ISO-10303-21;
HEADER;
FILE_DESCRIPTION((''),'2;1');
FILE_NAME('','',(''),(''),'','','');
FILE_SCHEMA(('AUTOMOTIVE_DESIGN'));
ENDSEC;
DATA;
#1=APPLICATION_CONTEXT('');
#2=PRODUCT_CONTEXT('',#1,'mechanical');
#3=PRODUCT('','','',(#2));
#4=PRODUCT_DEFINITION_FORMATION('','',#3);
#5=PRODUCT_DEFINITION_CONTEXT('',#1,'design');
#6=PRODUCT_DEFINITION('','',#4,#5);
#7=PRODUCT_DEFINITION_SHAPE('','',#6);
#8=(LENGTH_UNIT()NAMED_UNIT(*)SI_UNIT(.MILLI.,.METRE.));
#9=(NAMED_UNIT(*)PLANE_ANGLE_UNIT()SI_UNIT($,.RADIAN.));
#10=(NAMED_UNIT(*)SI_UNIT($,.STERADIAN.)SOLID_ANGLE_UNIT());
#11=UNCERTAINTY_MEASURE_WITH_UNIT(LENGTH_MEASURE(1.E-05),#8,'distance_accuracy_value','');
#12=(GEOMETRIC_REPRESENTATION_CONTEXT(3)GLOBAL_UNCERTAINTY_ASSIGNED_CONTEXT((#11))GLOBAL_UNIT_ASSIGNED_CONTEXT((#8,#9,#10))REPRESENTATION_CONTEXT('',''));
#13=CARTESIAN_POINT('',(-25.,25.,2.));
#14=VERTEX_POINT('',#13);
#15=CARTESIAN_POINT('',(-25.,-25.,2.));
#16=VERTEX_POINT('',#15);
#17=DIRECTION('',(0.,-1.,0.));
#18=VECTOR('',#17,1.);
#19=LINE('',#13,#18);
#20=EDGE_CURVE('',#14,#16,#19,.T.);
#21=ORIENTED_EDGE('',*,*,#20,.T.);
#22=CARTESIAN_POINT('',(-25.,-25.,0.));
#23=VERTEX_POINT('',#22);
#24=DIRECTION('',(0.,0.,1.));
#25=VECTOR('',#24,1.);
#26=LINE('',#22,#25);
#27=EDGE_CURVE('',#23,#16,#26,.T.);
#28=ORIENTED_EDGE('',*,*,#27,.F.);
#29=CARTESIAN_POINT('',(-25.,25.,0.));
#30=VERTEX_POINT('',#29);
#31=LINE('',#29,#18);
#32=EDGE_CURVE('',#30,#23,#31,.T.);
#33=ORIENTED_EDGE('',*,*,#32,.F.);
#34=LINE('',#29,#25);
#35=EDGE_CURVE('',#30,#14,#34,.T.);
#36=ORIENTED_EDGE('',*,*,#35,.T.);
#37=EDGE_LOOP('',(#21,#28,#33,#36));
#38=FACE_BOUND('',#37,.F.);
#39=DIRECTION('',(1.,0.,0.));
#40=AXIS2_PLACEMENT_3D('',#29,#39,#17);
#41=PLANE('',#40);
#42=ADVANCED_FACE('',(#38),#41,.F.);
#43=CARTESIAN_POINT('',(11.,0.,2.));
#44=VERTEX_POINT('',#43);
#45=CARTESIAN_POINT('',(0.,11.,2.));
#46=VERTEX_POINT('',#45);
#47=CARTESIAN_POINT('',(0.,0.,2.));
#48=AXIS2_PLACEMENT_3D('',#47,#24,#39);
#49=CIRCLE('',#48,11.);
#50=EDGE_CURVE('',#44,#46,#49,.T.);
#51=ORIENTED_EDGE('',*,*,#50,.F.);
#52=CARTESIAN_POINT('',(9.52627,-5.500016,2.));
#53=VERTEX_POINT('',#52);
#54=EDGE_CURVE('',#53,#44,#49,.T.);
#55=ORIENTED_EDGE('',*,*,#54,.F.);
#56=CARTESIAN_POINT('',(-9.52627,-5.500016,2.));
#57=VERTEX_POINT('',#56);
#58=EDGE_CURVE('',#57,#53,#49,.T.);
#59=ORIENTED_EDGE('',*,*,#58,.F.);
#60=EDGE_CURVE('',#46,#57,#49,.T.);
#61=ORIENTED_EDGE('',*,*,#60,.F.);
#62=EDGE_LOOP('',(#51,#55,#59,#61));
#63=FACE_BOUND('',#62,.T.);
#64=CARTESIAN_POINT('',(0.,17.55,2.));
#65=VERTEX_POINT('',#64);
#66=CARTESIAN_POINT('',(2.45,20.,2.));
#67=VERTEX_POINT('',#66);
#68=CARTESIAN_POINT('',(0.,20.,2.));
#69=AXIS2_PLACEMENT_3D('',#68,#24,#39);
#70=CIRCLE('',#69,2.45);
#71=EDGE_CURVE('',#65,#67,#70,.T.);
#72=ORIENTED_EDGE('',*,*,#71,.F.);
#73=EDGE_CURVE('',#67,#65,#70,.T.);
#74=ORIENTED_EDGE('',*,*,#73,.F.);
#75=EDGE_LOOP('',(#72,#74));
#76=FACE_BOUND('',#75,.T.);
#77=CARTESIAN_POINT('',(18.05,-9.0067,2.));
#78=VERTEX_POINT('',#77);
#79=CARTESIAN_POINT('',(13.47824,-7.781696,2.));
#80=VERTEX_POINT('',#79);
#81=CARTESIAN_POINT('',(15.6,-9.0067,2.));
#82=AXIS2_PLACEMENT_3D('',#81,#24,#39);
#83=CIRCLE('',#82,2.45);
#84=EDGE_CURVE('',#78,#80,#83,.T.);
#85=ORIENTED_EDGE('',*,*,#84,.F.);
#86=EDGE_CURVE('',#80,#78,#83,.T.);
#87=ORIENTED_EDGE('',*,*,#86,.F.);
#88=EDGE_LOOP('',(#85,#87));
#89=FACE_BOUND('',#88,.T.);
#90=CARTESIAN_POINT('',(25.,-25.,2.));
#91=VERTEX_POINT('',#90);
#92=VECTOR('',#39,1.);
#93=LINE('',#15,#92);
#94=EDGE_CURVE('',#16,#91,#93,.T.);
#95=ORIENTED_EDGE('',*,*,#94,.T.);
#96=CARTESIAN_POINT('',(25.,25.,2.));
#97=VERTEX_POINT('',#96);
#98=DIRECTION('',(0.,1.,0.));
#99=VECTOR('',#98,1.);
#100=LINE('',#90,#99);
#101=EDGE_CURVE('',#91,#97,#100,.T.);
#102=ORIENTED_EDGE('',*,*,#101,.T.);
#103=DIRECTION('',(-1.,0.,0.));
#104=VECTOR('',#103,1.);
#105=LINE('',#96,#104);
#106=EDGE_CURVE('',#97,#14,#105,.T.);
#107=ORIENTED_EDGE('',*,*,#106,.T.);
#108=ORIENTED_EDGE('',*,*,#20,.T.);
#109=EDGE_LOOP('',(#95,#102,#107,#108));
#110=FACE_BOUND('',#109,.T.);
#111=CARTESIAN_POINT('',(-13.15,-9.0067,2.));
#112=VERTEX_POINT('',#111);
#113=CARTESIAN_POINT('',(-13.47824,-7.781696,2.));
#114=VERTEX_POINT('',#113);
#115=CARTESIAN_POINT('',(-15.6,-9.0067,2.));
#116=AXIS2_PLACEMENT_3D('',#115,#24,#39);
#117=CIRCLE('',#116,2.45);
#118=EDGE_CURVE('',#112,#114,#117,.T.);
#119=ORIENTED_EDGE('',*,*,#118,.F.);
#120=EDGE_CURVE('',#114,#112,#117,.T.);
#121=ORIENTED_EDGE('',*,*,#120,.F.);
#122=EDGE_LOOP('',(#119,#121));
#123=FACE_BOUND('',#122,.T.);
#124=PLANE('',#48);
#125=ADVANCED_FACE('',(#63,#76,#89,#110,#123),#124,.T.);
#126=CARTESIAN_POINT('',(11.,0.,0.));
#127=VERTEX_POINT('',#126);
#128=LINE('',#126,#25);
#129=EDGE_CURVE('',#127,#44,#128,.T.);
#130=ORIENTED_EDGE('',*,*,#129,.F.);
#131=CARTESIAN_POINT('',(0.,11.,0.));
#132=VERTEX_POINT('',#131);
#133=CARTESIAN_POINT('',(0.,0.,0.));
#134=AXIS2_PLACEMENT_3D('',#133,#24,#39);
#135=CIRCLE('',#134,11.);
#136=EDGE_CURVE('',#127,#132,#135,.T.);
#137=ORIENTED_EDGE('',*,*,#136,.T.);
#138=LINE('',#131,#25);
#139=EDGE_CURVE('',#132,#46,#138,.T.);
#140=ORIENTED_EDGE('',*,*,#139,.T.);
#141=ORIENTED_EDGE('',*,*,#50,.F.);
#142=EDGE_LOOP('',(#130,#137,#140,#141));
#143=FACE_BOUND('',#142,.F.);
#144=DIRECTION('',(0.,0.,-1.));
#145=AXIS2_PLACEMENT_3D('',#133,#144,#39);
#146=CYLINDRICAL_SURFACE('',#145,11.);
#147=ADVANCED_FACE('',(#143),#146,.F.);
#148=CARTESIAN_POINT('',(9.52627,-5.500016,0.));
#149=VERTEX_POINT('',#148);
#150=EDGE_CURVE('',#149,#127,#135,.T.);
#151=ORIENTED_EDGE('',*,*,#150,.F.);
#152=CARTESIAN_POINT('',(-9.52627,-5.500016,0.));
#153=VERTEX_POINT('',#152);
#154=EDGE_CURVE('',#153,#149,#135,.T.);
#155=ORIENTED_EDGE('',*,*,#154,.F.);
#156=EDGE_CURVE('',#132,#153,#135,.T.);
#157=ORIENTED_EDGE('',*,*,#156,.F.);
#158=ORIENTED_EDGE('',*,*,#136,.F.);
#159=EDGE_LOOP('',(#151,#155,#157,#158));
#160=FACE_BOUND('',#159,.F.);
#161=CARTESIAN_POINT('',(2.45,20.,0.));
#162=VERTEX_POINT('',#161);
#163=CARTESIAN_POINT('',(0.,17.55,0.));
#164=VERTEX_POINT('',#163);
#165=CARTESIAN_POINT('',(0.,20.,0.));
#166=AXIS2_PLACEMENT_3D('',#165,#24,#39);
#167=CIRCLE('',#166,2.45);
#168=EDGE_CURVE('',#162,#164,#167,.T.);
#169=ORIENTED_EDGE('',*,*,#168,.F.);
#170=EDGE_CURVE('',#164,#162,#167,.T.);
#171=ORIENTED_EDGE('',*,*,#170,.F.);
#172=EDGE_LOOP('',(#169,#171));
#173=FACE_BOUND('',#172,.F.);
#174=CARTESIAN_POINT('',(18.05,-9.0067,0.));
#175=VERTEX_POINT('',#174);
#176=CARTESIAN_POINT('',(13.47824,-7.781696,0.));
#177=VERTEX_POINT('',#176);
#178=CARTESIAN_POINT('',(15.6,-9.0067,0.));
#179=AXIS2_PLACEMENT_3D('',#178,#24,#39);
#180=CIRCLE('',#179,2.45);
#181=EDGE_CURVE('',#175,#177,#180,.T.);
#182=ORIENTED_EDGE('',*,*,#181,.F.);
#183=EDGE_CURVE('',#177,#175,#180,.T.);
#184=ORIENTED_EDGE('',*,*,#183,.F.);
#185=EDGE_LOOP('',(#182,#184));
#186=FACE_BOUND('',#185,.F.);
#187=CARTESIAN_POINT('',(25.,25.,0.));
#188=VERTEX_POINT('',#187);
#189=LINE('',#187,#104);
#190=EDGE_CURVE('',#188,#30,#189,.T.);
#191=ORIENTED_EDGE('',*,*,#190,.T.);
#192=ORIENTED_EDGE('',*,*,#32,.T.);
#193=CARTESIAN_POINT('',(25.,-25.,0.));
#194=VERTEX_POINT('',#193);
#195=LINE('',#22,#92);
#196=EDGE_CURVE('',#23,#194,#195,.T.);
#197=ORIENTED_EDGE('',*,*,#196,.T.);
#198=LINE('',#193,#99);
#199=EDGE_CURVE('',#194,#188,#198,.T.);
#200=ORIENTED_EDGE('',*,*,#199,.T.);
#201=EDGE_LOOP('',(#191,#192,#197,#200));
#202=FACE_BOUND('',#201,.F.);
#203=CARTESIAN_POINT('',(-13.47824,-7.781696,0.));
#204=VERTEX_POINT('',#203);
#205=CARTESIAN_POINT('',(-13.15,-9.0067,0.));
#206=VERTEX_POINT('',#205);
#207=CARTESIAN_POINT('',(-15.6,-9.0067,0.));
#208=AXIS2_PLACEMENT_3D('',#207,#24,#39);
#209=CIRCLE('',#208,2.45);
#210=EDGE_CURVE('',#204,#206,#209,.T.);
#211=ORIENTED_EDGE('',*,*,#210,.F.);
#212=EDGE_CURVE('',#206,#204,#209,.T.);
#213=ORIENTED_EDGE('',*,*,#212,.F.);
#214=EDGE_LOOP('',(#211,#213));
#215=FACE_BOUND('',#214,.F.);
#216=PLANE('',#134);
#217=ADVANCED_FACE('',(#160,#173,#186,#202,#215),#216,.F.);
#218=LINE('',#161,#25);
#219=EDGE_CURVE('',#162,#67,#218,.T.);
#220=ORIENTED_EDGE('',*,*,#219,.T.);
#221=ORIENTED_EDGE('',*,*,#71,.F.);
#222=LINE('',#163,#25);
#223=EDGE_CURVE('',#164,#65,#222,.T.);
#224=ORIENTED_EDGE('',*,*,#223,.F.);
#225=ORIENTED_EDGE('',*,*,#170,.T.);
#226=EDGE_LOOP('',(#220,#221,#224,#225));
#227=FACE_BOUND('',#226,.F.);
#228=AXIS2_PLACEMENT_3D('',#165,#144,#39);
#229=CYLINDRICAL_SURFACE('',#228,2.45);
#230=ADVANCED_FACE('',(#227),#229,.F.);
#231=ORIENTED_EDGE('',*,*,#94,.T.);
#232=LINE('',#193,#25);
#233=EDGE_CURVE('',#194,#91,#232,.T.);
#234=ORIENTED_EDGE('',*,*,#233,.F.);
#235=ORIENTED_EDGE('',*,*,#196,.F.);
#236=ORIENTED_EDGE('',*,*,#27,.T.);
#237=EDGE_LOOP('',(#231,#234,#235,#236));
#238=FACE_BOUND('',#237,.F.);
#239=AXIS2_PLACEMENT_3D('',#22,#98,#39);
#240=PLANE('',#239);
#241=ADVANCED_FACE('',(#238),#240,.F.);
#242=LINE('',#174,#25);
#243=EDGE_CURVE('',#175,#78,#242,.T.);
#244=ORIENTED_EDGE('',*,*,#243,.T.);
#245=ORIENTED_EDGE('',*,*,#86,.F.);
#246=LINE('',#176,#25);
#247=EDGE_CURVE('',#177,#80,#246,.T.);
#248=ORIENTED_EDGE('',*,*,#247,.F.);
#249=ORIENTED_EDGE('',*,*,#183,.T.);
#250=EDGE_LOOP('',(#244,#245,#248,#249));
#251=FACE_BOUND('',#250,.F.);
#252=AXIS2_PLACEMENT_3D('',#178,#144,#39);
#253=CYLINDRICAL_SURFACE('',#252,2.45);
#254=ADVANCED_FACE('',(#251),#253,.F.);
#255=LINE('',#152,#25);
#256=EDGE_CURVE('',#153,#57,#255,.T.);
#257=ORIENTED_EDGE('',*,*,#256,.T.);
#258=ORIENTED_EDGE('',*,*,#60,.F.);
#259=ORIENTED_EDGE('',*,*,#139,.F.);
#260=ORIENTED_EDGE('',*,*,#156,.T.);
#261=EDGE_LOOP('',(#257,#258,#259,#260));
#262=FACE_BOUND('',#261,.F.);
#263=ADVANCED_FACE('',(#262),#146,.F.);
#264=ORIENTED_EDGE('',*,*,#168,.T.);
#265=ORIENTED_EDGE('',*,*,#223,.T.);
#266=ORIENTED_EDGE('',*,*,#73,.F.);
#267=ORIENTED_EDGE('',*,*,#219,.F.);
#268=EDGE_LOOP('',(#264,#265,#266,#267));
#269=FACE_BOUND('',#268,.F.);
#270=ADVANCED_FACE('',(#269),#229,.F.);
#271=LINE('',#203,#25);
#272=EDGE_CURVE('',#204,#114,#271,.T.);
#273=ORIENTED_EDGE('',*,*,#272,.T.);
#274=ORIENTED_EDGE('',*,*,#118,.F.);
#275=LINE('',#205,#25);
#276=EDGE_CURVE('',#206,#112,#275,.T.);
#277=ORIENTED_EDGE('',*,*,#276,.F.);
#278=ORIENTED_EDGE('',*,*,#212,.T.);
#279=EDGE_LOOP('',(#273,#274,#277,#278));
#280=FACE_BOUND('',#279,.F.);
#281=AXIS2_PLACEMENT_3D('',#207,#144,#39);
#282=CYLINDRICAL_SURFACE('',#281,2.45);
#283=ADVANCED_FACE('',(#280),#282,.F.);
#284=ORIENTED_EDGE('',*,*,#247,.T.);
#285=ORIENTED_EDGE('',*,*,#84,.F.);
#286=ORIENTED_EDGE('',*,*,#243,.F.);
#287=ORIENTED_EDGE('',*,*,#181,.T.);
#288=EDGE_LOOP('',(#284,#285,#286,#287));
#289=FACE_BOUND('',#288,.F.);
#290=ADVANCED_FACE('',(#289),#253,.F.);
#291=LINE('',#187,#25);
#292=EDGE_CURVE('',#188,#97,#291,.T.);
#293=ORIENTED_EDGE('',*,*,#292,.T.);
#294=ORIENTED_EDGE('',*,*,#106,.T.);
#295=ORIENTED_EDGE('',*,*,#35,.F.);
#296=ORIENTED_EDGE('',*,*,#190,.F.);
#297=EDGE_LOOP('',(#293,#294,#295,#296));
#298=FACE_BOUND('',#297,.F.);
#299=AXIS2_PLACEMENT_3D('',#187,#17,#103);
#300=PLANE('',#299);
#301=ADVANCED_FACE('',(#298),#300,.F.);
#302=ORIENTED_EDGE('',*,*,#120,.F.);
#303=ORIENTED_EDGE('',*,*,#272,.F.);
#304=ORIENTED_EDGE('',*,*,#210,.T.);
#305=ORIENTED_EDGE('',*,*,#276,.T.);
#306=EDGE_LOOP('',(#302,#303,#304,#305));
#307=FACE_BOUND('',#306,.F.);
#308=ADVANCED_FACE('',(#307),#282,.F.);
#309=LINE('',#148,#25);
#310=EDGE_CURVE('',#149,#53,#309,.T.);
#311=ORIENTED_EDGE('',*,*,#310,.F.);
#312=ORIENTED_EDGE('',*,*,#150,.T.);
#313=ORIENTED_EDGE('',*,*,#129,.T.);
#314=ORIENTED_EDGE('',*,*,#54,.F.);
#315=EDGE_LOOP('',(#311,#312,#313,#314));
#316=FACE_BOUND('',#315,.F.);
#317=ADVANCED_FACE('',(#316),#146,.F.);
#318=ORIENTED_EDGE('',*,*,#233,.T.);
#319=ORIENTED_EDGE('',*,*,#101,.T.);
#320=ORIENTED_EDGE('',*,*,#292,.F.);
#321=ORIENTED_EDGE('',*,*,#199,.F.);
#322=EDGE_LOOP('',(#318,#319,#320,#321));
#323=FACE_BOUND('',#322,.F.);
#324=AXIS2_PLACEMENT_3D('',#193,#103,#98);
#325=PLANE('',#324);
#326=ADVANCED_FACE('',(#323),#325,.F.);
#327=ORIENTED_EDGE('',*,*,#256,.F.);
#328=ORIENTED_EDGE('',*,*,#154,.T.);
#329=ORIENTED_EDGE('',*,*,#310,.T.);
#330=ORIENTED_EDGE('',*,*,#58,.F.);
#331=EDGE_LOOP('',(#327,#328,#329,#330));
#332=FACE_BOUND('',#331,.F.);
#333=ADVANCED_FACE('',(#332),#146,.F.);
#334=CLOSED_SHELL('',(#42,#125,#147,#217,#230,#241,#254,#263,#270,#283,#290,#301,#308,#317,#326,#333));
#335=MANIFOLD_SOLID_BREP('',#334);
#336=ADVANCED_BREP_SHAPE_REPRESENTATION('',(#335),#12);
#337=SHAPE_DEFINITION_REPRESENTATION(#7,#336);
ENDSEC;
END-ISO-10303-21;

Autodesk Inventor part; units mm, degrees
ref_plane "YZ Plane" through (0, 0, 0) normal (1, 0, 0) x (0, 1, 0)
ref_plane "XZ Plane" through (0, 0, 0) normal (0, 1, 0) x (-1, 0, 0)
ref_plane "XY Plane" through (0, 0, 0) normal (0, 0, 1) x (1, 0, 0)
sketch "Sketch1" plane through (0, 0, 0) normal (0, 0, 1) x (1, 0, 0)
  line L0 (-25, -25) -> (25, -25)
  line L1 (25, -25) -> (25, 25)
  line L2 (25, 25) -> (-25, 25)
  line L3 (-25, 25) -> (-25, -25)
  line L4 (-25, -25) -> (25, 25) construction
  line L5 (25, -25) -> (-25, 25) construction
  circle A0 centre (0, 0) radius 11
  line L6 (0, 0) -> (0, 20)
  line L7 (0, 0) -> (15.6, -9.0067)
  line L8 (0, 0) -> (-15.6, -9.0067)
  circle A1 centre (0, 20) radius 2.45
  circle A2 centre (15.6, -9.0067) radius 2.45
  circle A3 centre (-15.6, -9.0067) radius 2.45
  point P0 (25, -8.5947)
  point P1 (-25, -8.5947)
  dimension "d0" = 50
  dimension "d1" = 50
  dimension "d2" = 22
  dimension "d3" = 20
  dimension "d4" = 15.6
  dimension "d5" = 120
  dimension "d6" = 15.6
  dimension "d7" = 120
  dimension "d8" = 4.9
  dimension "d9" = 4.9
  dimension "d10" = 4.9
extrude "Extrusion2" add sketch "Sketch1" along normal blind 2
equation "\"d1\" = d0"
equation "\"d4\" = d6"
equation "\"d7\" = d5"
equation "\"d9\" = d8"
equation "\"d10\" = d8"
properties part number "mount_v04"
